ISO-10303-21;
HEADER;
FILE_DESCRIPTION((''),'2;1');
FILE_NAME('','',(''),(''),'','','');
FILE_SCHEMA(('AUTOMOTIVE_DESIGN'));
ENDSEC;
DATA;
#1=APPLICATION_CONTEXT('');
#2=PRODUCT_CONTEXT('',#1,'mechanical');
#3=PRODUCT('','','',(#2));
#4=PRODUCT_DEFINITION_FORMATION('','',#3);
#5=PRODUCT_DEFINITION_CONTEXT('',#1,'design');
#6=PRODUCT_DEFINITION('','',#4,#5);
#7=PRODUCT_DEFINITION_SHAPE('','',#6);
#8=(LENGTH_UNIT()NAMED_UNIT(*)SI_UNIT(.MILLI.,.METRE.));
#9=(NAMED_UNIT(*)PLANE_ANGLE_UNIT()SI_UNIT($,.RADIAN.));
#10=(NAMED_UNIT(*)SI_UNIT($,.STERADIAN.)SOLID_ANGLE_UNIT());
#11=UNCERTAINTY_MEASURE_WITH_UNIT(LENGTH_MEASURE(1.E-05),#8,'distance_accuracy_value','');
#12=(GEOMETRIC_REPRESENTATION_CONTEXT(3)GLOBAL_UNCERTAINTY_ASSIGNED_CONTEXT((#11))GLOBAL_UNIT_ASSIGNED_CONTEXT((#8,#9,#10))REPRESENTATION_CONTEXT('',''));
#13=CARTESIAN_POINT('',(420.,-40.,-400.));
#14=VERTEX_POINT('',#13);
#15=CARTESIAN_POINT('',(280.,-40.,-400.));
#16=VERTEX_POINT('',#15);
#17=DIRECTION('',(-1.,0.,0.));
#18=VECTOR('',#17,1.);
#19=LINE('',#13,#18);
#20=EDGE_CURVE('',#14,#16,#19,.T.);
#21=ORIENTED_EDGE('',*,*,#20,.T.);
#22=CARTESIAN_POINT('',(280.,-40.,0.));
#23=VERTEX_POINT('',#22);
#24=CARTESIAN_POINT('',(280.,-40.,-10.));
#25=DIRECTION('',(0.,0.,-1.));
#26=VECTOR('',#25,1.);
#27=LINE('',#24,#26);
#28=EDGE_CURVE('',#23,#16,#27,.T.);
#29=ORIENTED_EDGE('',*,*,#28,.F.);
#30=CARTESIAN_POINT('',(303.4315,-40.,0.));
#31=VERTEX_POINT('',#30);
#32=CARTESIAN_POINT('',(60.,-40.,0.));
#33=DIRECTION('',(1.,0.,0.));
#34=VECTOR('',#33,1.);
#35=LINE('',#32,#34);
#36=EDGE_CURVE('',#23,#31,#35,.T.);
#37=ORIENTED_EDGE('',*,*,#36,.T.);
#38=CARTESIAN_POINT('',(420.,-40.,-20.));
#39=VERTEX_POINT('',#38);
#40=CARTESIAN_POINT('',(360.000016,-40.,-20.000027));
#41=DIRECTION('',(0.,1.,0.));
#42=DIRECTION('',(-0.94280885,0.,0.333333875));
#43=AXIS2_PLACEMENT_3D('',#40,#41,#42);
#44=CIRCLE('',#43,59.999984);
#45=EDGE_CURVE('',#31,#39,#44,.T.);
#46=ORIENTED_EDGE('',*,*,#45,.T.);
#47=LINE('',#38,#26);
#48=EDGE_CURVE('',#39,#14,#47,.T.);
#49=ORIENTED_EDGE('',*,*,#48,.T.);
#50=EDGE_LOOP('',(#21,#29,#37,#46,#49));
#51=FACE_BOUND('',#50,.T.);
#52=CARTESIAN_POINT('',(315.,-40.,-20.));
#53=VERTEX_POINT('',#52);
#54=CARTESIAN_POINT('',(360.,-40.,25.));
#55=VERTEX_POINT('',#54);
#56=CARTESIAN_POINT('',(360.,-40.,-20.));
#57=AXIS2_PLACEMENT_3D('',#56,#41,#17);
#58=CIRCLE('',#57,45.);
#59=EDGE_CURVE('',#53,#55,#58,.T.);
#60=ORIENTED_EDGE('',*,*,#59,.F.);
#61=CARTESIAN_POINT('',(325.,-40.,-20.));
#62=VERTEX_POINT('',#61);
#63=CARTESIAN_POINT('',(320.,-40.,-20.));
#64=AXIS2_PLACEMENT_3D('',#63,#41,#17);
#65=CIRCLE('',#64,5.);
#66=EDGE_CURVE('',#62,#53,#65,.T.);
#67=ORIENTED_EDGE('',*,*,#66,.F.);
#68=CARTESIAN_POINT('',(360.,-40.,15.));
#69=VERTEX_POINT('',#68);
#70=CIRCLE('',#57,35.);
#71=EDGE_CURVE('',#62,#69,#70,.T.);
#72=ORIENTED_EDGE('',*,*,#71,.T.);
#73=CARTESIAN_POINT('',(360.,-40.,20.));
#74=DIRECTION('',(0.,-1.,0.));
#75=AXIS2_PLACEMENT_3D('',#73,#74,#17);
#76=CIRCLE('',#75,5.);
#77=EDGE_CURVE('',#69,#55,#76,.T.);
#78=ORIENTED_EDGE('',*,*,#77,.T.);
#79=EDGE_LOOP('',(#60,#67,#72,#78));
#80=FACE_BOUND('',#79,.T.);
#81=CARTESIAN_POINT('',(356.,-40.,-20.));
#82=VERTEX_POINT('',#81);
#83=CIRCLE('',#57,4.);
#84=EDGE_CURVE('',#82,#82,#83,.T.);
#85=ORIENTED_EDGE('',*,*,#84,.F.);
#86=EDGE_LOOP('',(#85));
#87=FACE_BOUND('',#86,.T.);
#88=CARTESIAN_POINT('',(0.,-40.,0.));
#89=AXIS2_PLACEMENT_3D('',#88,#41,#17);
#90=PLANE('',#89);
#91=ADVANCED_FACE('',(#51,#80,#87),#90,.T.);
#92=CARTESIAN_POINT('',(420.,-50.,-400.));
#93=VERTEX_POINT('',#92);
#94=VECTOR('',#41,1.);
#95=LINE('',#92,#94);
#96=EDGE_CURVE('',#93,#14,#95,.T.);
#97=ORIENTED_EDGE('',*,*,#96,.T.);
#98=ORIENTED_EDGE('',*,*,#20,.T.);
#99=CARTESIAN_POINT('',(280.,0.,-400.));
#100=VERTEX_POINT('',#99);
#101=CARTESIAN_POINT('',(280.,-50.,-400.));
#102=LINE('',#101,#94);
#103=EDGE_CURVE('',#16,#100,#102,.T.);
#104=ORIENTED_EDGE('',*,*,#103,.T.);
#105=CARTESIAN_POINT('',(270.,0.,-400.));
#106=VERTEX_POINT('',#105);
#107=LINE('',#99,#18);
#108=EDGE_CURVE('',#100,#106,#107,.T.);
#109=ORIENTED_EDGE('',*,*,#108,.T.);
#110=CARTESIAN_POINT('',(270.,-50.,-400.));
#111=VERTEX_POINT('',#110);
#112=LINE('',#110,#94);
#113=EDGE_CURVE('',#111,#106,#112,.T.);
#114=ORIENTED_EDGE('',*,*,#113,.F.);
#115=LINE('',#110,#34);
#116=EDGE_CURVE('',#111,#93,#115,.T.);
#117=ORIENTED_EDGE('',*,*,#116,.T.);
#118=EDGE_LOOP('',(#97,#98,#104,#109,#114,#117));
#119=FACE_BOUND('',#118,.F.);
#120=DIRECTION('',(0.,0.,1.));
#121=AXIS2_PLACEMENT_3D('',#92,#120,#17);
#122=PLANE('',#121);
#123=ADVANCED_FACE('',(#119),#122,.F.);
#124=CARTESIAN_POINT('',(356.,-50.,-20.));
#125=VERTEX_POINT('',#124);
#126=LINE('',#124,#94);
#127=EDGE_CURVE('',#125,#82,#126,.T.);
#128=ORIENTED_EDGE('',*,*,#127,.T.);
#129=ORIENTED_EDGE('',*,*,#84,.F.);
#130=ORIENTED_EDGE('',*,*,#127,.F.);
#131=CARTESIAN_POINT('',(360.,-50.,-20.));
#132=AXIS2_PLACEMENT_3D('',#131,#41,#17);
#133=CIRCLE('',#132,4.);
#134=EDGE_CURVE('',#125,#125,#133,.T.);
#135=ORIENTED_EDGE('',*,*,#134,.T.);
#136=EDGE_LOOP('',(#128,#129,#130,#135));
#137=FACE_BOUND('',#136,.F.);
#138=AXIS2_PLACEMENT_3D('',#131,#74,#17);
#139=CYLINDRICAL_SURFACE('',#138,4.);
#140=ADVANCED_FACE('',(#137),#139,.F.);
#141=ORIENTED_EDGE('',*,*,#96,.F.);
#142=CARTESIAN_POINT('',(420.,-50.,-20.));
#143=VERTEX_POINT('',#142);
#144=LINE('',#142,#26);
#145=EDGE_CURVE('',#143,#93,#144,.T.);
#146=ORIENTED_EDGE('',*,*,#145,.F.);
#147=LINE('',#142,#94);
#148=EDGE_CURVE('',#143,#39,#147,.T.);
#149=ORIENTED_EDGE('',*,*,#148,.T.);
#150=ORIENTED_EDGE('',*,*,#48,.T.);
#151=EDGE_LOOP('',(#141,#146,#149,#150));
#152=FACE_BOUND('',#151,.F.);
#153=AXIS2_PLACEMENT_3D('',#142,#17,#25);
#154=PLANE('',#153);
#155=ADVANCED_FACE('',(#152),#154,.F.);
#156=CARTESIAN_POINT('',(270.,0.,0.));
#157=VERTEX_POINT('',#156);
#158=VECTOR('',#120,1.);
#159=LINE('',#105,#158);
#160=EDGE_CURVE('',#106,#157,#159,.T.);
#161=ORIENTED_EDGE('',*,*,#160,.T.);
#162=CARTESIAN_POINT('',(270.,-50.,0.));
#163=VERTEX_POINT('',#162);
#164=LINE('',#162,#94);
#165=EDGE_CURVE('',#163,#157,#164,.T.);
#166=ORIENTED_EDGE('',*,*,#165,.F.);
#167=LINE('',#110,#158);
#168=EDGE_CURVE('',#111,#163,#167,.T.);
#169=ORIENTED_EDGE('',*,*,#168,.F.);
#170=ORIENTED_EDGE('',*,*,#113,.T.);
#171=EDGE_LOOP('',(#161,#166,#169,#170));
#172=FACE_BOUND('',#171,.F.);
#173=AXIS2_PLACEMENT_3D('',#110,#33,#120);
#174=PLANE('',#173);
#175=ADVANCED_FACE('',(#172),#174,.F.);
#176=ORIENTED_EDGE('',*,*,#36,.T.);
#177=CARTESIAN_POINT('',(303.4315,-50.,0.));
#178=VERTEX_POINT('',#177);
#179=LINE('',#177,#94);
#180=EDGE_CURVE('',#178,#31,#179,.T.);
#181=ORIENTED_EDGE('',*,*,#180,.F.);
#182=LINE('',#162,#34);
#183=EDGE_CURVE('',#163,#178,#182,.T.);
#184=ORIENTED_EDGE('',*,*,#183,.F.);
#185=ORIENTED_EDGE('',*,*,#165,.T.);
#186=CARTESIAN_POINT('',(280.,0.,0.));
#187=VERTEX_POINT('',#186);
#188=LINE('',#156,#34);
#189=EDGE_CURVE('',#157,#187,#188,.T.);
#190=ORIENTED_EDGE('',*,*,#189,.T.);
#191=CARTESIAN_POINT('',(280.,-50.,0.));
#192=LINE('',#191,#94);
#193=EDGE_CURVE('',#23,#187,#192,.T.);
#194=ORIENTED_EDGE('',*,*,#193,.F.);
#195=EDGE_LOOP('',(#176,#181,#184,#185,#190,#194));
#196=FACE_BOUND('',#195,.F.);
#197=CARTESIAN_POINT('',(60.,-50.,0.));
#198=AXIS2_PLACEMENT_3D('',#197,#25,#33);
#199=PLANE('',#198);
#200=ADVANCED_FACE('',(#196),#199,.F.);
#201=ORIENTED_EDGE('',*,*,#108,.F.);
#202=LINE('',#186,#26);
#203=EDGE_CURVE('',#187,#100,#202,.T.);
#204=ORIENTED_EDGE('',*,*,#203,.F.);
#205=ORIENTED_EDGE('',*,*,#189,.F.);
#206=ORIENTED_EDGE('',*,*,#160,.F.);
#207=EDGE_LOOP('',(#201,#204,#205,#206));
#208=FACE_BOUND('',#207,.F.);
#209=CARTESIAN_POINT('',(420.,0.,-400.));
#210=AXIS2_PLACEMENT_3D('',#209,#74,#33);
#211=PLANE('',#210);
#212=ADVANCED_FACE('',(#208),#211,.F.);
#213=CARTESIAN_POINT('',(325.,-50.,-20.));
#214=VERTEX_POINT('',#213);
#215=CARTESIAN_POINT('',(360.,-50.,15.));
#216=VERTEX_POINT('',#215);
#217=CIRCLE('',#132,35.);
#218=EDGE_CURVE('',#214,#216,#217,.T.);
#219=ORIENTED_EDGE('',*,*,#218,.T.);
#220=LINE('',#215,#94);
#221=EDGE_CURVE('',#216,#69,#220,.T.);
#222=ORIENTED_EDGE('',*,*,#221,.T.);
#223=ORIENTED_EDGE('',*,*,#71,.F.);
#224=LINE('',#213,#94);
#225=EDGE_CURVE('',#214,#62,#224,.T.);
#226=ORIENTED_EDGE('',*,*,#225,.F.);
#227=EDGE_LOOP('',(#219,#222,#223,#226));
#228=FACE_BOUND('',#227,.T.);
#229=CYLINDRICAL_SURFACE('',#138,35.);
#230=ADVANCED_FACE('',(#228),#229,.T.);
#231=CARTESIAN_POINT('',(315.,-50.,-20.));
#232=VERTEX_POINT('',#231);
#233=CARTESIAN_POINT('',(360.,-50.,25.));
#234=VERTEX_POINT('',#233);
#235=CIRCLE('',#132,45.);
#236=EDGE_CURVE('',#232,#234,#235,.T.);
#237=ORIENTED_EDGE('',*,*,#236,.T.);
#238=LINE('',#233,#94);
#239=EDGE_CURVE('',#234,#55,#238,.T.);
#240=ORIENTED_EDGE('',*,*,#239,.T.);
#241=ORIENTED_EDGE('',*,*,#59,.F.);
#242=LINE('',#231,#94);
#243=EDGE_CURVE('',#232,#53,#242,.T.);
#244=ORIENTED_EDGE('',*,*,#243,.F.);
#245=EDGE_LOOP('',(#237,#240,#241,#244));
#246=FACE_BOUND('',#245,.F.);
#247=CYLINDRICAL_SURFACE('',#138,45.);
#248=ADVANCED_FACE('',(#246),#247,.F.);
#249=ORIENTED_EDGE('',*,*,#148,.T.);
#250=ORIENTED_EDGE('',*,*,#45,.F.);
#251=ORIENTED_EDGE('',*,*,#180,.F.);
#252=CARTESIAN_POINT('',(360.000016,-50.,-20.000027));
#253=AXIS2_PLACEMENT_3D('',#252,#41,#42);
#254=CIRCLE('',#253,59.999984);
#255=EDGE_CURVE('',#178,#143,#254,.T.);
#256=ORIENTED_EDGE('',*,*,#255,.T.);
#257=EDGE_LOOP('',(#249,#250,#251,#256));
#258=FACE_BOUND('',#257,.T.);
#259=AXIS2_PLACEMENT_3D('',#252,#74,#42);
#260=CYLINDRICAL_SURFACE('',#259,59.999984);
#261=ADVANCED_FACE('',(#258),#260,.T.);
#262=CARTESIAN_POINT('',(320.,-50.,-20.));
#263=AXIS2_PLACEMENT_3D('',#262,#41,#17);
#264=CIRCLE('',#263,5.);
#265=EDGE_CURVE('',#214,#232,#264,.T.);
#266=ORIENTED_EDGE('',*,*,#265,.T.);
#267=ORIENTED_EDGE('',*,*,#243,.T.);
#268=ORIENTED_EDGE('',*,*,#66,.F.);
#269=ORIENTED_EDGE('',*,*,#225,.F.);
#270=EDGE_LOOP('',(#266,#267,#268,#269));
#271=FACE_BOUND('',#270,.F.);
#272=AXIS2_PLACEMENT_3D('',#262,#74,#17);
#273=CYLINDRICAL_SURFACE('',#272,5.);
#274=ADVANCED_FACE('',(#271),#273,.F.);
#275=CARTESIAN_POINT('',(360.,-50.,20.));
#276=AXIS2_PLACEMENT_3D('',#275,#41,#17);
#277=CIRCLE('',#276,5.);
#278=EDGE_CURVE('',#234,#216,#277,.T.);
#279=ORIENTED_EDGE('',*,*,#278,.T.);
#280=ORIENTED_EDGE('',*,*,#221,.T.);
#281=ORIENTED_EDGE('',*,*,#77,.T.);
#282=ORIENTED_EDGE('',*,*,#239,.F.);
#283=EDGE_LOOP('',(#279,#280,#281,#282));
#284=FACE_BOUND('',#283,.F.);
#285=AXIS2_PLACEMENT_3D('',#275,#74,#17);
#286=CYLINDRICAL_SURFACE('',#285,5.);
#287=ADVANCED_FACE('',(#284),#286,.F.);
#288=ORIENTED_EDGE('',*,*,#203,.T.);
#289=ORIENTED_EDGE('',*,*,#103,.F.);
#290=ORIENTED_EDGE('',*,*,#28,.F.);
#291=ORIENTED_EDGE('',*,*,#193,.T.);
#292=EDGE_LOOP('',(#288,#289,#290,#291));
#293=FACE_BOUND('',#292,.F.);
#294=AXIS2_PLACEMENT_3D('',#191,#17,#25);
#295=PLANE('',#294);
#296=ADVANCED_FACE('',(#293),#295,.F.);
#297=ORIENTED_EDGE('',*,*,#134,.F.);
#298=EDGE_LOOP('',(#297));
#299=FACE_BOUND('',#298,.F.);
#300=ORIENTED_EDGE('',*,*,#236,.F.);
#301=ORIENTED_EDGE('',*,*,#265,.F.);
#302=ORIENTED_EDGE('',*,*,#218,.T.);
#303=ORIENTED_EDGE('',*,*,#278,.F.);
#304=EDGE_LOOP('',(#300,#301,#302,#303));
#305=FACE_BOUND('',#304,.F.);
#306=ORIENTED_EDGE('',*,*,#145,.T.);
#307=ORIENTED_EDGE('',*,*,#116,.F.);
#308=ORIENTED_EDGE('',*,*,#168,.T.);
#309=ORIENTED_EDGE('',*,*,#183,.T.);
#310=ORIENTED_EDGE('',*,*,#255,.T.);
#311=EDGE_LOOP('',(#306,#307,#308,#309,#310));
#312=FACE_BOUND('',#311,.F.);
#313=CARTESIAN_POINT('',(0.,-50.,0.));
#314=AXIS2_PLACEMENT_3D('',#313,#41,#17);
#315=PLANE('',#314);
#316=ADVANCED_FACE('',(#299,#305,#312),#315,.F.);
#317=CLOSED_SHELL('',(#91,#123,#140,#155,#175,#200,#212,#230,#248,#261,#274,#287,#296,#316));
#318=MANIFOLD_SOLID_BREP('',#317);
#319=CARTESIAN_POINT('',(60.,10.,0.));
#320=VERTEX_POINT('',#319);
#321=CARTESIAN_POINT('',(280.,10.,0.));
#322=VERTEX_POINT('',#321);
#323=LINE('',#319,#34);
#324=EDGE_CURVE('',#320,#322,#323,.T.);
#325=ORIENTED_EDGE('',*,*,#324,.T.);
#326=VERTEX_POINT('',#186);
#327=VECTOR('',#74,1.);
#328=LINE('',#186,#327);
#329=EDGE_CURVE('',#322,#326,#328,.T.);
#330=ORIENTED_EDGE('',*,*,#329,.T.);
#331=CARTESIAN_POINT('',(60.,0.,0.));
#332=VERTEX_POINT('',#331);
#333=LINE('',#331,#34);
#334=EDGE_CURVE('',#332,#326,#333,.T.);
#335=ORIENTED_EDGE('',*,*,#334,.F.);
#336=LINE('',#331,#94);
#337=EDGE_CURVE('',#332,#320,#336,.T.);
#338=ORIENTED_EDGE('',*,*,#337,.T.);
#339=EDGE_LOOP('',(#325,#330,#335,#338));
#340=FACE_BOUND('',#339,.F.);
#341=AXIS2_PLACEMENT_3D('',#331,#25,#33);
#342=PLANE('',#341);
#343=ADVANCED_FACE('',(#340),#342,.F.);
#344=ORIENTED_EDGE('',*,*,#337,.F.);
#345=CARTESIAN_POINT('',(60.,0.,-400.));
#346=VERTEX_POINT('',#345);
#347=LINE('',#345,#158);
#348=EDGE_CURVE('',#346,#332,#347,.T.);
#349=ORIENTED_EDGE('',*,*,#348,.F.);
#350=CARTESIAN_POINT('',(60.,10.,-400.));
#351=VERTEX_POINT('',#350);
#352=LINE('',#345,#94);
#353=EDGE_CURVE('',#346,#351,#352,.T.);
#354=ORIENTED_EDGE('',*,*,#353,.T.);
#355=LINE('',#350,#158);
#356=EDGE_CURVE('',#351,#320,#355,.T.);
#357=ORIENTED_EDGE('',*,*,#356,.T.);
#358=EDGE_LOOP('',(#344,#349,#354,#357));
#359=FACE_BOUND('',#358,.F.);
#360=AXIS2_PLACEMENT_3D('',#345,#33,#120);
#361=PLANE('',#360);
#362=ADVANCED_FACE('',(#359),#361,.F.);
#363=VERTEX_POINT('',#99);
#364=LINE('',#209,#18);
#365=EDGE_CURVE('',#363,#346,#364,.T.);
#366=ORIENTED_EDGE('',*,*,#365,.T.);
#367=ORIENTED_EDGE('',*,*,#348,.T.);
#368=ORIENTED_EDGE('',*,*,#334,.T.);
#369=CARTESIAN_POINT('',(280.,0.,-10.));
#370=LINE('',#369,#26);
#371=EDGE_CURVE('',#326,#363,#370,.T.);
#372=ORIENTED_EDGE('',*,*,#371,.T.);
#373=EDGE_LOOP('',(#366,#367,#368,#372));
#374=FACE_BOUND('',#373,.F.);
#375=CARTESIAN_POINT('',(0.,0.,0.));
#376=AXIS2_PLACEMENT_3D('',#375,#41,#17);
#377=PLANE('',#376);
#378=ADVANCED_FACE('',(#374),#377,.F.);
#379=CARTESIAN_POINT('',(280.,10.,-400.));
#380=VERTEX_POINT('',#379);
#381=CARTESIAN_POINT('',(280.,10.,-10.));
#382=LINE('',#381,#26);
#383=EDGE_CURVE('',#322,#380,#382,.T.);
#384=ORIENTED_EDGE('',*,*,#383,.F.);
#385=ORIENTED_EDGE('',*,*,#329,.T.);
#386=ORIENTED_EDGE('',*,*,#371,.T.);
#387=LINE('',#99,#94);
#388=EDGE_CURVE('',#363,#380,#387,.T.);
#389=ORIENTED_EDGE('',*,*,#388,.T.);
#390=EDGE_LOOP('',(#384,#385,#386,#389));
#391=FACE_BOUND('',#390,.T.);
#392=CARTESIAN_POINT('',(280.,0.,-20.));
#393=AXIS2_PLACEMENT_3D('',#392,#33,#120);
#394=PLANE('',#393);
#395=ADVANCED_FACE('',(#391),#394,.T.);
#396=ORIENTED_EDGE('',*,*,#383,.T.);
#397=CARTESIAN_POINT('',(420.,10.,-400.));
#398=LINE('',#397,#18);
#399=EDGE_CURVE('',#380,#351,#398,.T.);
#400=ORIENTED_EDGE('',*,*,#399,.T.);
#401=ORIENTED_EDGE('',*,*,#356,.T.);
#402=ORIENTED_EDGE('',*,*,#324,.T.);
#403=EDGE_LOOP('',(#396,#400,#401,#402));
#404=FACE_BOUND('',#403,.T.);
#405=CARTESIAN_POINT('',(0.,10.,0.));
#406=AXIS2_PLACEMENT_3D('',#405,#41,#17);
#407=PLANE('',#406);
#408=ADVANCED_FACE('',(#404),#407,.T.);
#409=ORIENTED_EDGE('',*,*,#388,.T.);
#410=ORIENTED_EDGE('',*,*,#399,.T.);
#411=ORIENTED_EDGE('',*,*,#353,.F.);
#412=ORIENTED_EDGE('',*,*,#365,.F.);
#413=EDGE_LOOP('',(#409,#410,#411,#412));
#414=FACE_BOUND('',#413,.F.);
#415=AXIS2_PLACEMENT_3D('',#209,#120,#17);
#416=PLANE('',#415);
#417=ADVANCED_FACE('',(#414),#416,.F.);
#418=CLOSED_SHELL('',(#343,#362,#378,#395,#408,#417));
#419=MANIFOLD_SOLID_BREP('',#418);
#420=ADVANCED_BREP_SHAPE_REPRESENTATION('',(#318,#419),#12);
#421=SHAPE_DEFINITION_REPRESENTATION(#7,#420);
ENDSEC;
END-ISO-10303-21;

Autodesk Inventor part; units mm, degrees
ref_plane "YZ Plane" through (0, 0, 0) normal (1, 0, 0) x (0, 1, 0)
ref_plane "XZ Plane" through (0, 0, 0) normal (0, 1, 0) x (-1, 0, 0)
ref_plane "XY Plane" through (0, 0, 0) normal (0, 0, 1) x (1, 0, 0)
sketch "Boceto2" plane through (0, 0, 0) normal (0, 1, 0) x (-1, 0, 0)
  line L0 (-420, -20) -> (-420, -400)
  line L1 (-420, -400) -> (-60, -400)
  line L2 (-60, -400) -> (-60, 0)
  line L3 (-60, 0) -> (-303.4315, 0)
  arc A0 (-303.4315, 0) -> (-420, -20) centre (-360, -20) ccw
  circle A1 centre (-360, -20) radius 4
  circle A2 centre (-360, 20) radius 5
  circle A3 centre (-320, -20) radius 5
  arc A4 (-325, -20) -> (-360, 15) centre (-360, -20) ccw
  arc A5 (-315, -20) -> (-360, 25) centre (-360, -20) ccw
  dimension "d15" = 360
  dimension "d18" = 60
  dimension "d19" = 8
  dimension "d20" = 10
  dimension "d31" = 60
  dimension "d32" = 40
  dimension "d33" = 60
  dimension "d34" = 400
  dimension "d35" = 10
  dimension "d38" = 40
extrude "Extrusión1" add sketch "Boceto2" along normal blind 10 contours A0 L3 L2 L1 L0 | A2 A5 A3 A4 | A3
extrude "Extrusión2" cut sketch "Boceto2" along normal blind 10 contours A2 A5 A3 A4 | A3
ref_plane "Plano de trabajo1" through (280, 0, -20) normal (1, 0, 0) x (0, 0, -1)
split body "Dividir1" result two bodies by plane through (280, 0, -20) normal (1, 0, 0) first body at (353.1726, 0.5, -274.6569)
move or copy body "Desplazar cuerpo1" bodies to move or copy 2 copy no translate (0, -50, 0)
sketch "Boceto3" plane through (420, -50, -400) normal (0, -1, 0) x (1, 0, 0)
  line L0 (-140, 400) -> (-140, 400)
  line L1 (-140, 0) -> (-140, 0)
  line L2 (-140, 0) -> (-150, 0)
  line L3 (-150, 0) -> (-150, 400)
  line L4 (-150, 400) -> (-140, 400)
  line L5 (-140, 400) -> (-140, 0)
  point P0 (-420, 400)
  dimension "d47" = 10
  dimension "d48" = 400
extrude "Extrusión4" add sketch "Boceto3" against normal blind 50 bodies 2
properties part number "Base" material "Acero, fundido"
